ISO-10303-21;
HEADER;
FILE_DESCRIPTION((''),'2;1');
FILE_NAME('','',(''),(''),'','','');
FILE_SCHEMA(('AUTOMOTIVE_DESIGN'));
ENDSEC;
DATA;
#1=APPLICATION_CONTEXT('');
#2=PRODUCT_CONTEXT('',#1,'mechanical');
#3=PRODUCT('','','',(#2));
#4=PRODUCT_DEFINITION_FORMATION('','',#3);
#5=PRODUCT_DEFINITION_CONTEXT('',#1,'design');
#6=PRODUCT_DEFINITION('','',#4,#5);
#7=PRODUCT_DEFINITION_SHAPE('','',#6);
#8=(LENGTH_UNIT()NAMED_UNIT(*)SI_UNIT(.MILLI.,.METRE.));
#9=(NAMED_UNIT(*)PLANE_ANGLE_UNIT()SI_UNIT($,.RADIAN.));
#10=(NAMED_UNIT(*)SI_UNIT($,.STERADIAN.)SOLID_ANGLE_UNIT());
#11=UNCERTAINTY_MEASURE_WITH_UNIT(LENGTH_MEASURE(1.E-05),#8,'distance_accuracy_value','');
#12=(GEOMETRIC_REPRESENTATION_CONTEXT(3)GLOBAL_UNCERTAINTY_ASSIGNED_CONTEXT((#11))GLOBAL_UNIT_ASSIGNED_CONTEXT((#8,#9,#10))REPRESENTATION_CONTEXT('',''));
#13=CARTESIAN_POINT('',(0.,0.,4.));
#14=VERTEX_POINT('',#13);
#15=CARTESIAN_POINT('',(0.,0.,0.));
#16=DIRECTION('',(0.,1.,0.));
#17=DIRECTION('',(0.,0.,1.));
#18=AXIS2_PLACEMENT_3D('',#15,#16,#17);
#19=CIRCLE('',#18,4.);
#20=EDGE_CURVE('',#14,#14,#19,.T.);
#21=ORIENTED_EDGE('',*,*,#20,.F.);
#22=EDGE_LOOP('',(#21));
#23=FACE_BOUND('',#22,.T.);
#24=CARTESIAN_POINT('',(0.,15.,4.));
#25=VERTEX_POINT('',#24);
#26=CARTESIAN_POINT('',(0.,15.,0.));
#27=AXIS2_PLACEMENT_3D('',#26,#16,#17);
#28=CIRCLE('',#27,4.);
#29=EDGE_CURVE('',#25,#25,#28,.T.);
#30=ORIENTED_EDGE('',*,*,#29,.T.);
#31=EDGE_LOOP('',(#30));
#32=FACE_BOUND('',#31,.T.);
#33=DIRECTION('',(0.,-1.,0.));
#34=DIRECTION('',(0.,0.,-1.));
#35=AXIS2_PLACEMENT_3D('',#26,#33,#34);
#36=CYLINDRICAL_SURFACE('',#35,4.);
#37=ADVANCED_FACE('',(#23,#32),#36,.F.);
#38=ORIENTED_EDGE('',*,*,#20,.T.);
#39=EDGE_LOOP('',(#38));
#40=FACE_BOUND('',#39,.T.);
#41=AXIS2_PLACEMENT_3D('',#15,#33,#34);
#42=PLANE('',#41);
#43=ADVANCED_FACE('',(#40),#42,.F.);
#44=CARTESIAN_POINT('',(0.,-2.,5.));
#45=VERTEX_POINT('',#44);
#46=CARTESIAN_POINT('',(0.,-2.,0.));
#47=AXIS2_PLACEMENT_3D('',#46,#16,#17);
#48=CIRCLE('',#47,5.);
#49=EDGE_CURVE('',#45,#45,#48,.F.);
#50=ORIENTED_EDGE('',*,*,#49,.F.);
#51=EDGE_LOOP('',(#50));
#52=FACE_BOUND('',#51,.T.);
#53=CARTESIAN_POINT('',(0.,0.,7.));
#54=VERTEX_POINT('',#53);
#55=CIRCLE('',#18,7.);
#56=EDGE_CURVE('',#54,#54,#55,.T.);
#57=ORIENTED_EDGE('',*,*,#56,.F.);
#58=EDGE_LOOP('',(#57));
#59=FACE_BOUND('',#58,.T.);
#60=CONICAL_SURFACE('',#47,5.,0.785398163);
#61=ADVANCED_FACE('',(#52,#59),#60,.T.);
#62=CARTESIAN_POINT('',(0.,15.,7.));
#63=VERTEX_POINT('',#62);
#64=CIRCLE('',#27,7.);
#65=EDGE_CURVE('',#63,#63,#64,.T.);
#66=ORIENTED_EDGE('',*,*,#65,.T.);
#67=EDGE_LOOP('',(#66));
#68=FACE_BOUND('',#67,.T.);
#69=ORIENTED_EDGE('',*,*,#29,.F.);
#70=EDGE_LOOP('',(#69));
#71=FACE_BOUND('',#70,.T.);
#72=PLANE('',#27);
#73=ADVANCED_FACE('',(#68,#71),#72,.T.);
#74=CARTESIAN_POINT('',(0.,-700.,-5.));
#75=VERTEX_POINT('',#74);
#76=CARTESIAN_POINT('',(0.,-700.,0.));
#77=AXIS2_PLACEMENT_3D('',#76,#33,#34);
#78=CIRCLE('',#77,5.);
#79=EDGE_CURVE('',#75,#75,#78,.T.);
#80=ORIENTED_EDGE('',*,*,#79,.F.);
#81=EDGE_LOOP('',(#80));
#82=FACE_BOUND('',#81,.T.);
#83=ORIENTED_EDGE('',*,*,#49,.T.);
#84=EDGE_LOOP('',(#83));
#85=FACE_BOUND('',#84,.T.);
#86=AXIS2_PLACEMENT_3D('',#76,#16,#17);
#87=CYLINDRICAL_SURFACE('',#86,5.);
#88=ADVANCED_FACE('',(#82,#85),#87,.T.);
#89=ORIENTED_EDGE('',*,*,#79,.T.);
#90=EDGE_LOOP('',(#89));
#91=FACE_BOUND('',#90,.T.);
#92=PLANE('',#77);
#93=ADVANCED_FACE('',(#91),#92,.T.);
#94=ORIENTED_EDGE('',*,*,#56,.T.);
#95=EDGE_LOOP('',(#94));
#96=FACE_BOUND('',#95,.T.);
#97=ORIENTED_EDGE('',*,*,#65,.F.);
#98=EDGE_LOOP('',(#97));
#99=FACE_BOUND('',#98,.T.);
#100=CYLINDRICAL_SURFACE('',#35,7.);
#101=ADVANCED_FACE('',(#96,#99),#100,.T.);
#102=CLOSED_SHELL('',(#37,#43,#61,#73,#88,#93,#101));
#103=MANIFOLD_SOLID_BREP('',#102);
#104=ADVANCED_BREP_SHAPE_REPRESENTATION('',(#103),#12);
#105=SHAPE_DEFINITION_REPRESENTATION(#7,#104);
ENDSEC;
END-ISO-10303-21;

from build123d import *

# Parameters (mm, degrees)
SKETCH1_R           = 7
SKETCH1_R_2         = 4
BOSS_EXTRUDE1_DEPTH = 15
SKETCH2_R           = 5
BOSS_EXTRUDE2_DEPTH = 700
CHAMFER1_SIZE       = 2


with BuildPart() as part:
    # Sketch1 → Boss-Extrude1 (new body)
    with BuildSketch(Plane(origin=(0, 0, 0), x_dir=(1, 0, 0), z_dir=(0, 1, 0))):
        with Locations(Location((0, 0, 0), (0, 0, 270))):
            Circle(SKETCH1_R)
        with Locations(Location((0, 0, 0), (0, 0, 270))):
            Circle(SKETCH1_R_2, mode=Mode.SUBTRACT)
    extrude(amount=BOSS_EXTRUDE1_DEPTH)

    # Sketch2 → Boss-Extrude2 (add)
    with BuildSketch(Plane.XZ):
        with Locations(Location((0, 0, 0), (0, 0, 90))):
            Circle(SKETCH2_R)
    extrude(amount=BOSS_EXTRUDE2_DEPTH)

    # Chamfer1
    chamfer1_edges = [part.edges().sort_by_distance(p)[0] for p in [
        (0, 0, -5),
    ]]
    chamfer(chamfer1_edges, length=CHAMFER1_SIZE - 0.0001)  # a hair under: the kernel refuses the full size


solid = part.part
